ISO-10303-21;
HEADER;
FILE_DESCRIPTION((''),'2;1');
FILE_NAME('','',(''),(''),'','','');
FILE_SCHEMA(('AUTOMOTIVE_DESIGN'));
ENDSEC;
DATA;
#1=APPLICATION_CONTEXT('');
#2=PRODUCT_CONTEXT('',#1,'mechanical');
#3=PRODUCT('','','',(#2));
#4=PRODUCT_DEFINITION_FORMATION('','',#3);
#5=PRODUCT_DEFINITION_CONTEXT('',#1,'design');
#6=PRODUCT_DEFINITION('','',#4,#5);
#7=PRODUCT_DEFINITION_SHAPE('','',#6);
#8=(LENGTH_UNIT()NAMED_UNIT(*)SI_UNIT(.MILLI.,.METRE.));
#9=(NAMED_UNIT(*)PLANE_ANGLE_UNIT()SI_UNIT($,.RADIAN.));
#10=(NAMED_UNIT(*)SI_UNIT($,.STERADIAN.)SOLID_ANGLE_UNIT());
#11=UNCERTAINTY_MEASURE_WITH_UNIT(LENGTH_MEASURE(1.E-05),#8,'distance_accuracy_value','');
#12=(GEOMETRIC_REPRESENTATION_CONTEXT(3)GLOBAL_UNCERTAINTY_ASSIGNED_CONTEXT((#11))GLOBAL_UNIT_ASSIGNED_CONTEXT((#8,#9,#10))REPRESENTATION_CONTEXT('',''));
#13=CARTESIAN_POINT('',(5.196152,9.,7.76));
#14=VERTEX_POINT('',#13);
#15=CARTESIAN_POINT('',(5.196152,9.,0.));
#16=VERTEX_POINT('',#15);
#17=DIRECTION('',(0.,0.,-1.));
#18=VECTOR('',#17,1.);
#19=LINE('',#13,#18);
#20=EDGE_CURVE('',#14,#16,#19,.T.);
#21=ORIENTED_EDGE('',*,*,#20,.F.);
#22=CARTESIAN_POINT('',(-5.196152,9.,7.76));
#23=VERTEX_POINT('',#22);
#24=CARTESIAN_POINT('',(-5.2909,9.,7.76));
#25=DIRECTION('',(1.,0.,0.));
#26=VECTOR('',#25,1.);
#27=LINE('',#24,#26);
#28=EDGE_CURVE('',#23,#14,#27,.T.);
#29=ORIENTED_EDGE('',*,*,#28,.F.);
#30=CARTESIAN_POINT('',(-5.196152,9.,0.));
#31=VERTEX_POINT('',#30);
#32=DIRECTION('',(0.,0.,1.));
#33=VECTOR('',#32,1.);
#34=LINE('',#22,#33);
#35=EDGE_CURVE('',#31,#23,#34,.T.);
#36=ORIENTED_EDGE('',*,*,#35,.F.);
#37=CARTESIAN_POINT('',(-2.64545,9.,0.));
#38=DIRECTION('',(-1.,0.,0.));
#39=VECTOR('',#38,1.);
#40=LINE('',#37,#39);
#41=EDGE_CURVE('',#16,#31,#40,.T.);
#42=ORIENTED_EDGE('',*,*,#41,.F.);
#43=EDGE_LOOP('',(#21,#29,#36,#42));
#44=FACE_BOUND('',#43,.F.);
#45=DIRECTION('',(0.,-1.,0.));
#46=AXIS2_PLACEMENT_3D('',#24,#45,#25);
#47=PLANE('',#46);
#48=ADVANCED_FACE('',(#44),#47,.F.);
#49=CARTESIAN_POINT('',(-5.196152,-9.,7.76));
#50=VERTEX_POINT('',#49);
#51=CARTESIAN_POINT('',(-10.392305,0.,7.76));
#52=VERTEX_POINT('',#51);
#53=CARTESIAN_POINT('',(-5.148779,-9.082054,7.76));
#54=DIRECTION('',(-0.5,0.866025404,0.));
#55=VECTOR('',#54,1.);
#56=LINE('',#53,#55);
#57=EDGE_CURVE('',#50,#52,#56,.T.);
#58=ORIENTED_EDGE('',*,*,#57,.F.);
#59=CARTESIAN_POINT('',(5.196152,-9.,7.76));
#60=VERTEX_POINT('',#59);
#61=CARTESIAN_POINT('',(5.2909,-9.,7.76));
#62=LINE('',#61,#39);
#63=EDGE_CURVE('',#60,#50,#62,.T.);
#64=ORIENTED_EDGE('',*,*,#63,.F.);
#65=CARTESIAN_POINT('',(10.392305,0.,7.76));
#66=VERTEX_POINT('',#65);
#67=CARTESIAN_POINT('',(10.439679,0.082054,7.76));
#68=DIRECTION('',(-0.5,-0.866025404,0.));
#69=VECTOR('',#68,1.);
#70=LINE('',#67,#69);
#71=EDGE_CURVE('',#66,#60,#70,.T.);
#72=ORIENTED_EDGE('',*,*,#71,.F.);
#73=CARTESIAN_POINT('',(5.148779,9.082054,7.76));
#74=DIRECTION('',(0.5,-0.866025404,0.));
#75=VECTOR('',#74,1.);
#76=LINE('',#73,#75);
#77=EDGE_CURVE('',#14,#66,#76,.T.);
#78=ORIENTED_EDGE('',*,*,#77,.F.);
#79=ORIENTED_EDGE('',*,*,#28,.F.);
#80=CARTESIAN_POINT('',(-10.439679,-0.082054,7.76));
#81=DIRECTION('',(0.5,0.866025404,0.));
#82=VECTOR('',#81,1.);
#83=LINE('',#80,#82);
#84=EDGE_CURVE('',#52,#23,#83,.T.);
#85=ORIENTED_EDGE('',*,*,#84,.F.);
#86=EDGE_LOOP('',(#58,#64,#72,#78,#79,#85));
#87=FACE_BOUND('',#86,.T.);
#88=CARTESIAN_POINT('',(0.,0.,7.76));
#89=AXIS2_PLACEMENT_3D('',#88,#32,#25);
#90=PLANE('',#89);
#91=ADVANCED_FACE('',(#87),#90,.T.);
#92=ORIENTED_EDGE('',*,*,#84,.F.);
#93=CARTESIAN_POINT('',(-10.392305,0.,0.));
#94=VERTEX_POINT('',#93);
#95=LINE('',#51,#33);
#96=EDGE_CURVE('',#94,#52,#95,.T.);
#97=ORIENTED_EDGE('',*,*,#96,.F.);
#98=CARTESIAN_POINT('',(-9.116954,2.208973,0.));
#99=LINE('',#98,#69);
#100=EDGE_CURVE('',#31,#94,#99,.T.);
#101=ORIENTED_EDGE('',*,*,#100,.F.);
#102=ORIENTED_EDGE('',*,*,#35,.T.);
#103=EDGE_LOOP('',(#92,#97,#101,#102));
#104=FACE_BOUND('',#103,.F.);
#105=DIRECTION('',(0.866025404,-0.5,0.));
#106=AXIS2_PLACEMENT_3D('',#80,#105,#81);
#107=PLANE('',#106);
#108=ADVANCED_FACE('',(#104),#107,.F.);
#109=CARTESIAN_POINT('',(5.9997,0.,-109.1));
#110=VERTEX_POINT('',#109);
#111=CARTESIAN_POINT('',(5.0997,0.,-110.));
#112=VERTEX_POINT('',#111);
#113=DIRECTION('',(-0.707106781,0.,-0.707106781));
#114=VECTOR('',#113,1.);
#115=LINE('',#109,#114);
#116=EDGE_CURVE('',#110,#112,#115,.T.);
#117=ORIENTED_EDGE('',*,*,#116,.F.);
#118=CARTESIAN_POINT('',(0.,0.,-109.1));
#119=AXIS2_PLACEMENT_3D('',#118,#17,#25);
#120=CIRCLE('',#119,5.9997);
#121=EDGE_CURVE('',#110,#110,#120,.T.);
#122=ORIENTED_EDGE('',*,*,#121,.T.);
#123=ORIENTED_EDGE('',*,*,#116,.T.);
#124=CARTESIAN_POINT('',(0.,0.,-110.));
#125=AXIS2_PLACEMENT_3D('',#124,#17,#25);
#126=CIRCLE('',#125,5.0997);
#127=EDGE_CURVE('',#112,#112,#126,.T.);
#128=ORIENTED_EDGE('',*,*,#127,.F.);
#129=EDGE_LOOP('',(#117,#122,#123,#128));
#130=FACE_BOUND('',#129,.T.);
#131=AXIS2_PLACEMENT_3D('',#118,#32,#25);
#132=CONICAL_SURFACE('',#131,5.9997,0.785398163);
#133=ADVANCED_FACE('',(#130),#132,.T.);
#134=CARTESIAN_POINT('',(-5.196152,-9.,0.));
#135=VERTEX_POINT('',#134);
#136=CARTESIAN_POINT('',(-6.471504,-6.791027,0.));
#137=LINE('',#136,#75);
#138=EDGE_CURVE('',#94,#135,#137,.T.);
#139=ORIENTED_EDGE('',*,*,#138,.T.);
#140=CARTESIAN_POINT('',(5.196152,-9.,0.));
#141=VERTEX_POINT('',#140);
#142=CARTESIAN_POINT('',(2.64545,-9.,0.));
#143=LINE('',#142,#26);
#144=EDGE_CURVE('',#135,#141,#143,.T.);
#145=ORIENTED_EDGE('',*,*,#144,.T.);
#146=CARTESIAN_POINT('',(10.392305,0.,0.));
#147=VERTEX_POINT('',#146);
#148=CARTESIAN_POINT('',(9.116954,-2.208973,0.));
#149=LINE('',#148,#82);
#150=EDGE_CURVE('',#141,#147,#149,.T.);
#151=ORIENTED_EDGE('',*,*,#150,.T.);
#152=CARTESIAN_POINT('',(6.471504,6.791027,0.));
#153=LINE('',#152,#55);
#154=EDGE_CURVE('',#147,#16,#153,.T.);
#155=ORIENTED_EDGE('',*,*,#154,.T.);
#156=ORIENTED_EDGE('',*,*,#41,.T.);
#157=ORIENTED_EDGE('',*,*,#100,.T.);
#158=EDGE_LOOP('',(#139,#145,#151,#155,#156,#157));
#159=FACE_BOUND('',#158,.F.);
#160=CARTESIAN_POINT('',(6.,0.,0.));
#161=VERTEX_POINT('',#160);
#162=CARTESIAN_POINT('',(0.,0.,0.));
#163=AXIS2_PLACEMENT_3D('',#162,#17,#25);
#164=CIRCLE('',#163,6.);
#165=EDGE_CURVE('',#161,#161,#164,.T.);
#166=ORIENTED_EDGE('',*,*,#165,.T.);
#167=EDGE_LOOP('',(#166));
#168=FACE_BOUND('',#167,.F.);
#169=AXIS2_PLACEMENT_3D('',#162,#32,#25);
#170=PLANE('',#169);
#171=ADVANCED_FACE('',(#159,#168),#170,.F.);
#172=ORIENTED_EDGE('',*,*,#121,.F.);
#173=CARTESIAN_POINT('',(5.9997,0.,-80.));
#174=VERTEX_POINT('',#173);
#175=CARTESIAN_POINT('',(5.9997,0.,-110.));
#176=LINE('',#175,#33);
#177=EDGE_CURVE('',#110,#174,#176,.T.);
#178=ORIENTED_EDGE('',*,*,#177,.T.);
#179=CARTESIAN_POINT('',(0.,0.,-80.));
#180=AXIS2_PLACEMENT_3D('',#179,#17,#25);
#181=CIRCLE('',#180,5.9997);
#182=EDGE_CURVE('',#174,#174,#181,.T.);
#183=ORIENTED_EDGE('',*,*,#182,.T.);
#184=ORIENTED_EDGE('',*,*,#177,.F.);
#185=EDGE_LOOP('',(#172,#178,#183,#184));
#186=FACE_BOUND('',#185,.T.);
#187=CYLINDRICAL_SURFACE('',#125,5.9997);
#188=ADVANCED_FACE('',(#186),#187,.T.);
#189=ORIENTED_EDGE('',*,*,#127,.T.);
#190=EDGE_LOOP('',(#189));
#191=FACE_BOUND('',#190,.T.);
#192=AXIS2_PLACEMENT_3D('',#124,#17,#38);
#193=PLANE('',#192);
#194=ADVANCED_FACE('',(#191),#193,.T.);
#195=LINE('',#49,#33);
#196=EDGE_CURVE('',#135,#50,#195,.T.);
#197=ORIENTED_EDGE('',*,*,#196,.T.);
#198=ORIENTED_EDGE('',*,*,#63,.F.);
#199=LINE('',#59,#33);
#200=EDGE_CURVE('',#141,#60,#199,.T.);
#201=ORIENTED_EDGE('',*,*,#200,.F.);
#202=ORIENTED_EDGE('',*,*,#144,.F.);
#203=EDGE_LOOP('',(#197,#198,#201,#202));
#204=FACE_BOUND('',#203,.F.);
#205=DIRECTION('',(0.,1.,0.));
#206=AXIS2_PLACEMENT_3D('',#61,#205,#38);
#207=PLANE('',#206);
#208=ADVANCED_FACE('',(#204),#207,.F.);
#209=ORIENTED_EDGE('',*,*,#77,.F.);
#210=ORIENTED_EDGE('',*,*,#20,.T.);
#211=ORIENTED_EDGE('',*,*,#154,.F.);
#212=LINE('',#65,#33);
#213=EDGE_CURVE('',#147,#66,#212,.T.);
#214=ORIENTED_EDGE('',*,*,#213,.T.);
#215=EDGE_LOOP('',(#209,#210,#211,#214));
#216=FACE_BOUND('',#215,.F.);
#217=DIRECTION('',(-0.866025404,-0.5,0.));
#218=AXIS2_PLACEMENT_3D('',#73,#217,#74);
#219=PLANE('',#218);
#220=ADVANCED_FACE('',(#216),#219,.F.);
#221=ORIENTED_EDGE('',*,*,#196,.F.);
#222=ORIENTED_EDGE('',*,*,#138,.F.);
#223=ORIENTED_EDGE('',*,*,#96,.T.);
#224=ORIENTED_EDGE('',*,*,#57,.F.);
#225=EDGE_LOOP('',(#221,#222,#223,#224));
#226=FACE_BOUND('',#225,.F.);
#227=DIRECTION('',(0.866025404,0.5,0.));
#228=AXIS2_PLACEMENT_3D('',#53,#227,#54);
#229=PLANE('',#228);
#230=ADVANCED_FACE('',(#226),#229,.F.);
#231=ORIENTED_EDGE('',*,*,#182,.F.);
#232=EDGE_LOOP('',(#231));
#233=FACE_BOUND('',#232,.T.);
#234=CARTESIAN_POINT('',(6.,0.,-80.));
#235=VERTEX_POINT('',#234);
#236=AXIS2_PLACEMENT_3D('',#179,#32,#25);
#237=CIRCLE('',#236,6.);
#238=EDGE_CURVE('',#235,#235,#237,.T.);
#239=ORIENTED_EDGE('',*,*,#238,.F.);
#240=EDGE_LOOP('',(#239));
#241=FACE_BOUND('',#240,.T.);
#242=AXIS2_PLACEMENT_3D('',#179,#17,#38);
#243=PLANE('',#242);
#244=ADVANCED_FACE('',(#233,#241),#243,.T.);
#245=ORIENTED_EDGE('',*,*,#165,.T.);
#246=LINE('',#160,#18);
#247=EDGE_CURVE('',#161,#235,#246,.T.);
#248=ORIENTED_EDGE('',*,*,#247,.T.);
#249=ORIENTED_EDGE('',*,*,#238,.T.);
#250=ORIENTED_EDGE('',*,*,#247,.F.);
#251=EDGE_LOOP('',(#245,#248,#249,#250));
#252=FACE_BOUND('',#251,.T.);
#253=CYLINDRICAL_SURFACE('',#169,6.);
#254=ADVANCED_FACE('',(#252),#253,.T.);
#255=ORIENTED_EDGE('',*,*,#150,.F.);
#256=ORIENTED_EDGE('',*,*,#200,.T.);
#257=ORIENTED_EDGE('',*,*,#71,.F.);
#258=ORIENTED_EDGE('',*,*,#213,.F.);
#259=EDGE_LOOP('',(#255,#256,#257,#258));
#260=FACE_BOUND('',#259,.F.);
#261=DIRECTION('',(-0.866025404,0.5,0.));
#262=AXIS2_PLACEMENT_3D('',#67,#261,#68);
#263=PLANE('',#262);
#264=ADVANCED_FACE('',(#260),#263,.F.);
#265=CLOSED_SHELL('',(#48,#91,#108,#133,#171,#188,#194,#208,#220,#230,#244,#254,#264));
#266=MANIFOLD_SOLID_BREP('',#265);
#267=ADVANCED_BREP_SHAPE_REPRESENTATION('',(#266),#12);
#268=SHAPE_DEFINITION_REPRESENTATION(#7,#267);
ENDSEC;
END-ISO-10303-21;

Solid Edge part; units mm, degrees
sketch "Sketch1" plane through (0, 0, 0) normal (0, 0, 1) x (1, 0, 0)
  circle A0 centre (0, 0) radius 10.44
  dimension "D1" = 20.88
extrude "Protrusion1" add sketch "Sketch1" along normal blind 7.76
sketch "Sketch2" plane through (0, 0, 0) normal (0, 0, -1) x (1, 0, 0)
  circle A0 centre (0, 0) radius 6
extrude "Protrusion2" add sketch "Sketch2" along normal blind 110
sketch "Sketch3" plane through (0, 0, -110) normal (0, 0, -1) x (1, 0, 0)
  circle A0 centre (0, 0) radius 5.9997
extrude "Cutout1" cut sketch "Sketch3" against normal blind 30 flip side to cut
chamfer "Chamfer_1" distance 0.9 angle 45 1 edges at (-5.9997, 0, -110)
sketch "Sketch4" plane through (0, 0, 7.76) normal (0, 0, 1) x (1, 0, 0)
  line L0 (-5.2909, 9) -> (5.2909, 9)
  dimension "D1" = 18
extrude "Cutout2" cut sketch "Sketch4" against normal up to next material side at (0, 9.05, 7.76)
pattern_circular "Pattern1" count 6 over 360 about axis through (0, 0, 7.76) along (0, 0, 1) of "Cutout2"
properties part number "24104514"
